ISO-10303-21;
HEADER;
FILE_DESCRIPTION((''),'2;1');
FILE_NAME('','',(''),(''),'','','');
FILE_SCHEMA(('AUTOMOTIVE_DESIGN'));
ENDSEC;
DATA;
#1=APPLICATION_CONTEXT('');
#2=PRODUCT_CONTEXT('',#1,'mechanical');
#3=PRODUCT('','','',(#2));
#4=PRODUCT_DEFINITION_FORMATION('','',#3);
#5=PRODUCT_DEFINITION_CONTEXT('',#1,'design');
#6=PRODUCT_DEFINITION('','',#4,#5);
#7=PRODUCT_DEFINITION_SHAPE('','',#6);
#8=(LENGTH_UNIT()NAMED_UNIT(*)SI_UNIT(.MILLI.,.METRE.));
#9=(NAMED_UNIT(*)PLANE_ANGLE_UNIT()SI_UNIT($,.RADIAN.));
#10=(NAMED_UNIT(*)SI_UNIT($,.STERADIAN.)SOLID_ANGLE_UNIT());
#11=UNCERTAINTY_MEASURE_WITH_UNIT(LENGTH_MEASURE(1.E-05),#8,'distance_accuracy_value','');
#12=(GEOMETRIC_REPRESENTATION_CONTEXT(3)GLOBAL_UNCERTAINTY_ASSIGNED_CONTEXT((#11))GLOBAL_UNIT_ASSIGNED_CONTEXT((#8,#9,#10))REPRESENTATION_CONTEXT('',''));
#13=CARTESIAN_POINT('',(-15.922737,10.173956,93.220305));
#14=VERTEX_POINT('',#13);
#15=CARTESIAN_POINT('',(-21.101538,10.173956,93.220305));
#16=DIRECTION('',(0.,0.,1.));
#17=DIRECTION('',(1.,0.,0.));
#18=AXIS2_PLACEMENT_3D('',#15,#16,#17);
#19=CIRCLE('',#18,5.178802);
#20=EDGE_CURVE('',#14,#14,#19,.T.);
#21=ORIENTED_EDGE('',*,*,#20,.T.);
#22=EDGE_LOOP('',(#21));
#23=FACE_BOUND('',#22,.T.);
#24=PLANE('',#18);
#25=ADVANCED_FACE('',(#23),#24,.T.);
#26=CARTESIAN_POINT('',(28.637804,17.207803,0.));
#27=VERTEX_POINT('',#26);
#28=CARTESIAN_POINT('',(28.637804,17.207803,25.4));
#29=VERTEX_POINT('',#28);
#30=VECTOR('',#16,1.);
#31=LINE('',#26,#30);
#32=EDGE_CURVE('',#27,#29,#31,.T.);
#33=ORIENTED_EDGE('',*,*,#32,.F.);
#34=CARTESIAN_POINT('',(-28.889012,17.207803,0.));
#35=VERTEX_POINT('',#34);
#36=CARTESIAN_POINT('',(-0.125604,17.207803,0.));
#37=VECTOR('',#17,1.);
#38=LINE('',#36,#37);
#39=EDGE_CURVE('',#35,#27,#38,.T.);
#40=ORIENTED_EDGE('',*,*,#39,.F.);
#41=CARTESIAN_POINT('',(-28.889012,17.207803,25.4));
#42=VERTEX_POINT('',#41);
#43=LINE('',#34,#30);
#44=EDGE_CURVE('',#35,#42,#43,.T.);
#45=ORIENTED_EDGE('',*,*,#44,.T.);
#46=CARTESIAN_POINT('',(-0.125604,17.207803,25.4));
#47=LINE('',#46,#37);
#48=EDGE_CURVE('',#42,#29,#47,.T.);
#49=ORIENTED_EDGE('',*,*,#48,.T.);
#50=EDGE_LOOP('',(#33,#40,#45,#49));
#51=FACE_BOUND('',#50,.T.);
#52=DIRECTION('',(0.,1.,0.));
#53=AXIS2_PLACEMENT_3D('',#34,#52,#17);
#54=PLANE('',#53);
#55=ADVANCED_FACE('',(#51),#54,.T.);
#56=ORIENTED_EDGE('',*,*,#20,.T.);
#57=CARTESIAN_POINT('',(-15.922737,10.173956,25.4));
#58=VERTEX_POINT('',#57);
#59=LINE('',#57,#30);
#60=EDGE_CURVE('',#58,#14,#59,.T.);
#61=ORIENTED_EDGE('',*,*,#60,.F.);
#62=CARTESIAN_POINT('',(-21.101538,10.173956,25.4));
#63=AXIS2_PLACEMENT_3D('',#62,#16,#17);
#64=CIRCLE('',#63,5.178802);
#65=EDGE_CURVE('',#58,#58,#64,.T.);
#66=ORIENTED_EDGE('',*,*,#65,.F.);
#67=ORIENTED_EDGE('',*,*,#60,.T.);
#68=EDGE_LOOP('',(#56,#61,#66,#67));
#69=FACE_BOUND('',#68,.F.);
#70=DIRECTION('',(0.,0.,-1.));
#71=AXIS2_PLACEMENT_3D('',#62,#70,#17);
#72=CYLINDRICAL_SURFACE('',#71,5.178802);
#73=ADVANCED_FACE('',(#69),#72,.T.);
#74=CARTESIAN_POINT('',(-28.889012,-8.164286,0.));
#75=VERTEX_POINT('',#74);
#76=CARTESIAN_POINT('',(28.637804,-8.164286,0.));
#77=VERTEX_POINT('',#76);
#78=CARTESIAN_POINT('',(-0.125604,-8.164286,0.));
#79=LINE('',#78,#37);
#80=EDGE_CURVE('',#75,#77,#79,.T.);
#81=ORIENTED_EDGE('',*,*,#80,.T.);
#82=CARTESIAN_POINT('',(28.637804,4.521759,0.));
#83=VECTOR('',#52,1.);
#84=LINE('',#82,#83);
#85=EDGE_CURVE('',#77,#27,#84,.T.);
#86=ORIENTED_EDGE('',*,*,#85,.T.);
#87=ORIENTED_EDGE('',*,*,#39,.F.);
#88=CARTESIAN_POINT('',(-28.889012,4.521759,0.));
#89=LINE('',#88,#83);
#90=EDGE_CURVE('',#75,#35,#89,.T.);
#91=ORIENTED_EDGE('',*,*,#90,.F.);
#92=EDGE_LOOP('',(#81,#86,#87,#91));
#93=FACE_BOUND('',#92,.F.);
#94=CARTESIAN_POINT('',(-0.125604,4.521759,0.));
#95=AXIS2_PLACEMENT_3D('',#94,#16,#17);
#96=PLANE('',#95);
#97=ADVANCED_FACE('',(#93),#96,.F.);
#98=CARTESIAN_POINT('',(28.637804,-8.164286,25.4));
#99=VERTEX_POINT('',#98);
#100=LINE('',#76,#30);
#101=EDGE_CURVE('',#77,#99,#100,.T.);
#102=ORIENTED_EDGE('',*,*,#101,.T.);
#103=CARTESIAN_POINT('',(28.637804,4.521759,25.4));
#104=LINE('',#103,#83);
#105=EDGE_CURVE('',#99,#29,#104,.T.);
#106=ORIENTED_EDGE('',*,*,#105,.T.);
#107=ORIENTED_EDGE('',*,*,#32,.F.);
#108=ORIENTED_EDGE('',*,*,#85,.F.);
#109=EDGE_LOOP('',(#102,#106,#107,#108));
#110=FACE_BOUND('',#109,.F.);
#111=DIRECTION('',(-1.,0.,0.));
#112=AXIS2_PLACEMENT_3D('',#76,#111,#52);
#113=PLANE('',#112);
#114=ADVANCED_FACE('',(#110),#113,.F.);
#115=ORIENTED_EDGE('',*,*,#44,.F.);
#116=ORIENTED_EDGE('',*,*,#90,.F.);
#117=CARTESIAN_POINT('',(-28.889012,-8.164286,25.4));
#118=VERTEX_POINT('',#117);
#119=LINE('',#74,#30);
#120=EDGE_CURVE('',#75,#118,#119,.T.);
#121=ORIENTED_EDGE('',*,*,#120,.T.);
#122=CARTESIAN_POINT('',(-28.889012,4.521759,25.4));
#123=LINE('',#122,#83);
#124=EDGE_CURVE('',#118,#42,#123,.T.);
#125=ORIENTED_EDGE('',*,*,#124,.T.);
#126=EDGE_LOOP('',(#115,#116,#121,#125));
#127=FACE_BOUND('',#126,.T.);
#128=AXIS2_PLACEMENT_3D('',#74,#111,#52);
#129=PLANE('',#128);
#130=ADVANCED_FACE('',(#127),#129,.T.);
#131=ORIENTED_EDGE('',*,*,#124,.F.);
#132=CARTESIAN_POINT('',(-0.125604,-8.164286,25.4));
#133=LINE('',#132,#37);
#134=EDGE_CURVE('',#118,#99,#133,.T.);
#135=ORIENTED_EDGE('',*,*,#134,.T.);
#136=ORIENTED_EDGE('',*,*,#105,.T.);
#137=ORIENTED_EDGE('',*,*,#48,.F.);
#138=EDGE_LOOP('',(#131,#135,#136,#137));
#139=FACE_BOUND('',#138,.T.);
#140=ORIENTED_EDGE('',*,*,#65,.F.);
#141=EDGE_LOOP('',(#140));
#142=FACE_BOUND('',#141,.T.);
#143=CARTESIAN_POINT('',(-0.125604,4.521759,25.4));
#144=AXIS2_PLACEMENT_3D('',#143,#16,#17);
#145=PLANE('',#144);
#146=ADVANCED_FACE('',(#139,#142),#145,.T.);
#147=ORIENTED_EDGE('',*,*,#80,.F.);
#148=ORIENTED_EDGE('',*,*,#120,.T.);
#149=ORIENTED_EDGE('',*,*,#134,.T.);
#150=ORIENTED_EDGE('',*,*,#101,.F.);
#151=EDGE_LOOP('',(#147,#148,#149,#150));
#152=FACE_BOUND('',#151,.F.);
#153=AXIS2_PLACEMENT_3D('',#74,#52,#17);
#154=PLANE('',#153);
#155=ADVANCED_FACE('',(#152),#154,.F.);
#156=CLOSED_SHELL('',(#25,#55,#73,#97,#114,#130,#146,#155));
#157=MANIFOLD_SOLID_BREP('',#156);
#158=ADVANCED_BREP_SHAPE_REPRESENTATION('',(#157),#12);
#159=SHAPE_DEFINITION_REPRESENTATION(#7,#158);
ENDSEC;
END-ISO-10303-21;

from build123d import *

# Parameters (mm, degrees)
F0_W     = 57.5268156826
F0_H     = 25.3720888868
F1_DEPTH = 25.4
F2_R     = 5.1788015889
F3_DEPTH = 67.8203047


# Not quite as in the source:
# - an extrude ends at something that could not be found from the text; its depth is read off the source's solid


with BuildPart() as f1:
    # F0 (on Top) → F1 (new body)
    with BuildSketch(Plane.XY):
        with Locations((-0.1256037503, 4.5217587613)):
            Rectangle(F0_W, F0_H)
    extrude(amount=F1_DEPTH)

    # F2 (on face) → F3 (join, through all)
    with BuildSketch(Plane.XY.offset(25.4)):
        with Locations((-21.1015380919, 10.1739559323)):
            Circle(F2_R)
    extrude(amount=F3_DEPTH)


solid = f1.part
